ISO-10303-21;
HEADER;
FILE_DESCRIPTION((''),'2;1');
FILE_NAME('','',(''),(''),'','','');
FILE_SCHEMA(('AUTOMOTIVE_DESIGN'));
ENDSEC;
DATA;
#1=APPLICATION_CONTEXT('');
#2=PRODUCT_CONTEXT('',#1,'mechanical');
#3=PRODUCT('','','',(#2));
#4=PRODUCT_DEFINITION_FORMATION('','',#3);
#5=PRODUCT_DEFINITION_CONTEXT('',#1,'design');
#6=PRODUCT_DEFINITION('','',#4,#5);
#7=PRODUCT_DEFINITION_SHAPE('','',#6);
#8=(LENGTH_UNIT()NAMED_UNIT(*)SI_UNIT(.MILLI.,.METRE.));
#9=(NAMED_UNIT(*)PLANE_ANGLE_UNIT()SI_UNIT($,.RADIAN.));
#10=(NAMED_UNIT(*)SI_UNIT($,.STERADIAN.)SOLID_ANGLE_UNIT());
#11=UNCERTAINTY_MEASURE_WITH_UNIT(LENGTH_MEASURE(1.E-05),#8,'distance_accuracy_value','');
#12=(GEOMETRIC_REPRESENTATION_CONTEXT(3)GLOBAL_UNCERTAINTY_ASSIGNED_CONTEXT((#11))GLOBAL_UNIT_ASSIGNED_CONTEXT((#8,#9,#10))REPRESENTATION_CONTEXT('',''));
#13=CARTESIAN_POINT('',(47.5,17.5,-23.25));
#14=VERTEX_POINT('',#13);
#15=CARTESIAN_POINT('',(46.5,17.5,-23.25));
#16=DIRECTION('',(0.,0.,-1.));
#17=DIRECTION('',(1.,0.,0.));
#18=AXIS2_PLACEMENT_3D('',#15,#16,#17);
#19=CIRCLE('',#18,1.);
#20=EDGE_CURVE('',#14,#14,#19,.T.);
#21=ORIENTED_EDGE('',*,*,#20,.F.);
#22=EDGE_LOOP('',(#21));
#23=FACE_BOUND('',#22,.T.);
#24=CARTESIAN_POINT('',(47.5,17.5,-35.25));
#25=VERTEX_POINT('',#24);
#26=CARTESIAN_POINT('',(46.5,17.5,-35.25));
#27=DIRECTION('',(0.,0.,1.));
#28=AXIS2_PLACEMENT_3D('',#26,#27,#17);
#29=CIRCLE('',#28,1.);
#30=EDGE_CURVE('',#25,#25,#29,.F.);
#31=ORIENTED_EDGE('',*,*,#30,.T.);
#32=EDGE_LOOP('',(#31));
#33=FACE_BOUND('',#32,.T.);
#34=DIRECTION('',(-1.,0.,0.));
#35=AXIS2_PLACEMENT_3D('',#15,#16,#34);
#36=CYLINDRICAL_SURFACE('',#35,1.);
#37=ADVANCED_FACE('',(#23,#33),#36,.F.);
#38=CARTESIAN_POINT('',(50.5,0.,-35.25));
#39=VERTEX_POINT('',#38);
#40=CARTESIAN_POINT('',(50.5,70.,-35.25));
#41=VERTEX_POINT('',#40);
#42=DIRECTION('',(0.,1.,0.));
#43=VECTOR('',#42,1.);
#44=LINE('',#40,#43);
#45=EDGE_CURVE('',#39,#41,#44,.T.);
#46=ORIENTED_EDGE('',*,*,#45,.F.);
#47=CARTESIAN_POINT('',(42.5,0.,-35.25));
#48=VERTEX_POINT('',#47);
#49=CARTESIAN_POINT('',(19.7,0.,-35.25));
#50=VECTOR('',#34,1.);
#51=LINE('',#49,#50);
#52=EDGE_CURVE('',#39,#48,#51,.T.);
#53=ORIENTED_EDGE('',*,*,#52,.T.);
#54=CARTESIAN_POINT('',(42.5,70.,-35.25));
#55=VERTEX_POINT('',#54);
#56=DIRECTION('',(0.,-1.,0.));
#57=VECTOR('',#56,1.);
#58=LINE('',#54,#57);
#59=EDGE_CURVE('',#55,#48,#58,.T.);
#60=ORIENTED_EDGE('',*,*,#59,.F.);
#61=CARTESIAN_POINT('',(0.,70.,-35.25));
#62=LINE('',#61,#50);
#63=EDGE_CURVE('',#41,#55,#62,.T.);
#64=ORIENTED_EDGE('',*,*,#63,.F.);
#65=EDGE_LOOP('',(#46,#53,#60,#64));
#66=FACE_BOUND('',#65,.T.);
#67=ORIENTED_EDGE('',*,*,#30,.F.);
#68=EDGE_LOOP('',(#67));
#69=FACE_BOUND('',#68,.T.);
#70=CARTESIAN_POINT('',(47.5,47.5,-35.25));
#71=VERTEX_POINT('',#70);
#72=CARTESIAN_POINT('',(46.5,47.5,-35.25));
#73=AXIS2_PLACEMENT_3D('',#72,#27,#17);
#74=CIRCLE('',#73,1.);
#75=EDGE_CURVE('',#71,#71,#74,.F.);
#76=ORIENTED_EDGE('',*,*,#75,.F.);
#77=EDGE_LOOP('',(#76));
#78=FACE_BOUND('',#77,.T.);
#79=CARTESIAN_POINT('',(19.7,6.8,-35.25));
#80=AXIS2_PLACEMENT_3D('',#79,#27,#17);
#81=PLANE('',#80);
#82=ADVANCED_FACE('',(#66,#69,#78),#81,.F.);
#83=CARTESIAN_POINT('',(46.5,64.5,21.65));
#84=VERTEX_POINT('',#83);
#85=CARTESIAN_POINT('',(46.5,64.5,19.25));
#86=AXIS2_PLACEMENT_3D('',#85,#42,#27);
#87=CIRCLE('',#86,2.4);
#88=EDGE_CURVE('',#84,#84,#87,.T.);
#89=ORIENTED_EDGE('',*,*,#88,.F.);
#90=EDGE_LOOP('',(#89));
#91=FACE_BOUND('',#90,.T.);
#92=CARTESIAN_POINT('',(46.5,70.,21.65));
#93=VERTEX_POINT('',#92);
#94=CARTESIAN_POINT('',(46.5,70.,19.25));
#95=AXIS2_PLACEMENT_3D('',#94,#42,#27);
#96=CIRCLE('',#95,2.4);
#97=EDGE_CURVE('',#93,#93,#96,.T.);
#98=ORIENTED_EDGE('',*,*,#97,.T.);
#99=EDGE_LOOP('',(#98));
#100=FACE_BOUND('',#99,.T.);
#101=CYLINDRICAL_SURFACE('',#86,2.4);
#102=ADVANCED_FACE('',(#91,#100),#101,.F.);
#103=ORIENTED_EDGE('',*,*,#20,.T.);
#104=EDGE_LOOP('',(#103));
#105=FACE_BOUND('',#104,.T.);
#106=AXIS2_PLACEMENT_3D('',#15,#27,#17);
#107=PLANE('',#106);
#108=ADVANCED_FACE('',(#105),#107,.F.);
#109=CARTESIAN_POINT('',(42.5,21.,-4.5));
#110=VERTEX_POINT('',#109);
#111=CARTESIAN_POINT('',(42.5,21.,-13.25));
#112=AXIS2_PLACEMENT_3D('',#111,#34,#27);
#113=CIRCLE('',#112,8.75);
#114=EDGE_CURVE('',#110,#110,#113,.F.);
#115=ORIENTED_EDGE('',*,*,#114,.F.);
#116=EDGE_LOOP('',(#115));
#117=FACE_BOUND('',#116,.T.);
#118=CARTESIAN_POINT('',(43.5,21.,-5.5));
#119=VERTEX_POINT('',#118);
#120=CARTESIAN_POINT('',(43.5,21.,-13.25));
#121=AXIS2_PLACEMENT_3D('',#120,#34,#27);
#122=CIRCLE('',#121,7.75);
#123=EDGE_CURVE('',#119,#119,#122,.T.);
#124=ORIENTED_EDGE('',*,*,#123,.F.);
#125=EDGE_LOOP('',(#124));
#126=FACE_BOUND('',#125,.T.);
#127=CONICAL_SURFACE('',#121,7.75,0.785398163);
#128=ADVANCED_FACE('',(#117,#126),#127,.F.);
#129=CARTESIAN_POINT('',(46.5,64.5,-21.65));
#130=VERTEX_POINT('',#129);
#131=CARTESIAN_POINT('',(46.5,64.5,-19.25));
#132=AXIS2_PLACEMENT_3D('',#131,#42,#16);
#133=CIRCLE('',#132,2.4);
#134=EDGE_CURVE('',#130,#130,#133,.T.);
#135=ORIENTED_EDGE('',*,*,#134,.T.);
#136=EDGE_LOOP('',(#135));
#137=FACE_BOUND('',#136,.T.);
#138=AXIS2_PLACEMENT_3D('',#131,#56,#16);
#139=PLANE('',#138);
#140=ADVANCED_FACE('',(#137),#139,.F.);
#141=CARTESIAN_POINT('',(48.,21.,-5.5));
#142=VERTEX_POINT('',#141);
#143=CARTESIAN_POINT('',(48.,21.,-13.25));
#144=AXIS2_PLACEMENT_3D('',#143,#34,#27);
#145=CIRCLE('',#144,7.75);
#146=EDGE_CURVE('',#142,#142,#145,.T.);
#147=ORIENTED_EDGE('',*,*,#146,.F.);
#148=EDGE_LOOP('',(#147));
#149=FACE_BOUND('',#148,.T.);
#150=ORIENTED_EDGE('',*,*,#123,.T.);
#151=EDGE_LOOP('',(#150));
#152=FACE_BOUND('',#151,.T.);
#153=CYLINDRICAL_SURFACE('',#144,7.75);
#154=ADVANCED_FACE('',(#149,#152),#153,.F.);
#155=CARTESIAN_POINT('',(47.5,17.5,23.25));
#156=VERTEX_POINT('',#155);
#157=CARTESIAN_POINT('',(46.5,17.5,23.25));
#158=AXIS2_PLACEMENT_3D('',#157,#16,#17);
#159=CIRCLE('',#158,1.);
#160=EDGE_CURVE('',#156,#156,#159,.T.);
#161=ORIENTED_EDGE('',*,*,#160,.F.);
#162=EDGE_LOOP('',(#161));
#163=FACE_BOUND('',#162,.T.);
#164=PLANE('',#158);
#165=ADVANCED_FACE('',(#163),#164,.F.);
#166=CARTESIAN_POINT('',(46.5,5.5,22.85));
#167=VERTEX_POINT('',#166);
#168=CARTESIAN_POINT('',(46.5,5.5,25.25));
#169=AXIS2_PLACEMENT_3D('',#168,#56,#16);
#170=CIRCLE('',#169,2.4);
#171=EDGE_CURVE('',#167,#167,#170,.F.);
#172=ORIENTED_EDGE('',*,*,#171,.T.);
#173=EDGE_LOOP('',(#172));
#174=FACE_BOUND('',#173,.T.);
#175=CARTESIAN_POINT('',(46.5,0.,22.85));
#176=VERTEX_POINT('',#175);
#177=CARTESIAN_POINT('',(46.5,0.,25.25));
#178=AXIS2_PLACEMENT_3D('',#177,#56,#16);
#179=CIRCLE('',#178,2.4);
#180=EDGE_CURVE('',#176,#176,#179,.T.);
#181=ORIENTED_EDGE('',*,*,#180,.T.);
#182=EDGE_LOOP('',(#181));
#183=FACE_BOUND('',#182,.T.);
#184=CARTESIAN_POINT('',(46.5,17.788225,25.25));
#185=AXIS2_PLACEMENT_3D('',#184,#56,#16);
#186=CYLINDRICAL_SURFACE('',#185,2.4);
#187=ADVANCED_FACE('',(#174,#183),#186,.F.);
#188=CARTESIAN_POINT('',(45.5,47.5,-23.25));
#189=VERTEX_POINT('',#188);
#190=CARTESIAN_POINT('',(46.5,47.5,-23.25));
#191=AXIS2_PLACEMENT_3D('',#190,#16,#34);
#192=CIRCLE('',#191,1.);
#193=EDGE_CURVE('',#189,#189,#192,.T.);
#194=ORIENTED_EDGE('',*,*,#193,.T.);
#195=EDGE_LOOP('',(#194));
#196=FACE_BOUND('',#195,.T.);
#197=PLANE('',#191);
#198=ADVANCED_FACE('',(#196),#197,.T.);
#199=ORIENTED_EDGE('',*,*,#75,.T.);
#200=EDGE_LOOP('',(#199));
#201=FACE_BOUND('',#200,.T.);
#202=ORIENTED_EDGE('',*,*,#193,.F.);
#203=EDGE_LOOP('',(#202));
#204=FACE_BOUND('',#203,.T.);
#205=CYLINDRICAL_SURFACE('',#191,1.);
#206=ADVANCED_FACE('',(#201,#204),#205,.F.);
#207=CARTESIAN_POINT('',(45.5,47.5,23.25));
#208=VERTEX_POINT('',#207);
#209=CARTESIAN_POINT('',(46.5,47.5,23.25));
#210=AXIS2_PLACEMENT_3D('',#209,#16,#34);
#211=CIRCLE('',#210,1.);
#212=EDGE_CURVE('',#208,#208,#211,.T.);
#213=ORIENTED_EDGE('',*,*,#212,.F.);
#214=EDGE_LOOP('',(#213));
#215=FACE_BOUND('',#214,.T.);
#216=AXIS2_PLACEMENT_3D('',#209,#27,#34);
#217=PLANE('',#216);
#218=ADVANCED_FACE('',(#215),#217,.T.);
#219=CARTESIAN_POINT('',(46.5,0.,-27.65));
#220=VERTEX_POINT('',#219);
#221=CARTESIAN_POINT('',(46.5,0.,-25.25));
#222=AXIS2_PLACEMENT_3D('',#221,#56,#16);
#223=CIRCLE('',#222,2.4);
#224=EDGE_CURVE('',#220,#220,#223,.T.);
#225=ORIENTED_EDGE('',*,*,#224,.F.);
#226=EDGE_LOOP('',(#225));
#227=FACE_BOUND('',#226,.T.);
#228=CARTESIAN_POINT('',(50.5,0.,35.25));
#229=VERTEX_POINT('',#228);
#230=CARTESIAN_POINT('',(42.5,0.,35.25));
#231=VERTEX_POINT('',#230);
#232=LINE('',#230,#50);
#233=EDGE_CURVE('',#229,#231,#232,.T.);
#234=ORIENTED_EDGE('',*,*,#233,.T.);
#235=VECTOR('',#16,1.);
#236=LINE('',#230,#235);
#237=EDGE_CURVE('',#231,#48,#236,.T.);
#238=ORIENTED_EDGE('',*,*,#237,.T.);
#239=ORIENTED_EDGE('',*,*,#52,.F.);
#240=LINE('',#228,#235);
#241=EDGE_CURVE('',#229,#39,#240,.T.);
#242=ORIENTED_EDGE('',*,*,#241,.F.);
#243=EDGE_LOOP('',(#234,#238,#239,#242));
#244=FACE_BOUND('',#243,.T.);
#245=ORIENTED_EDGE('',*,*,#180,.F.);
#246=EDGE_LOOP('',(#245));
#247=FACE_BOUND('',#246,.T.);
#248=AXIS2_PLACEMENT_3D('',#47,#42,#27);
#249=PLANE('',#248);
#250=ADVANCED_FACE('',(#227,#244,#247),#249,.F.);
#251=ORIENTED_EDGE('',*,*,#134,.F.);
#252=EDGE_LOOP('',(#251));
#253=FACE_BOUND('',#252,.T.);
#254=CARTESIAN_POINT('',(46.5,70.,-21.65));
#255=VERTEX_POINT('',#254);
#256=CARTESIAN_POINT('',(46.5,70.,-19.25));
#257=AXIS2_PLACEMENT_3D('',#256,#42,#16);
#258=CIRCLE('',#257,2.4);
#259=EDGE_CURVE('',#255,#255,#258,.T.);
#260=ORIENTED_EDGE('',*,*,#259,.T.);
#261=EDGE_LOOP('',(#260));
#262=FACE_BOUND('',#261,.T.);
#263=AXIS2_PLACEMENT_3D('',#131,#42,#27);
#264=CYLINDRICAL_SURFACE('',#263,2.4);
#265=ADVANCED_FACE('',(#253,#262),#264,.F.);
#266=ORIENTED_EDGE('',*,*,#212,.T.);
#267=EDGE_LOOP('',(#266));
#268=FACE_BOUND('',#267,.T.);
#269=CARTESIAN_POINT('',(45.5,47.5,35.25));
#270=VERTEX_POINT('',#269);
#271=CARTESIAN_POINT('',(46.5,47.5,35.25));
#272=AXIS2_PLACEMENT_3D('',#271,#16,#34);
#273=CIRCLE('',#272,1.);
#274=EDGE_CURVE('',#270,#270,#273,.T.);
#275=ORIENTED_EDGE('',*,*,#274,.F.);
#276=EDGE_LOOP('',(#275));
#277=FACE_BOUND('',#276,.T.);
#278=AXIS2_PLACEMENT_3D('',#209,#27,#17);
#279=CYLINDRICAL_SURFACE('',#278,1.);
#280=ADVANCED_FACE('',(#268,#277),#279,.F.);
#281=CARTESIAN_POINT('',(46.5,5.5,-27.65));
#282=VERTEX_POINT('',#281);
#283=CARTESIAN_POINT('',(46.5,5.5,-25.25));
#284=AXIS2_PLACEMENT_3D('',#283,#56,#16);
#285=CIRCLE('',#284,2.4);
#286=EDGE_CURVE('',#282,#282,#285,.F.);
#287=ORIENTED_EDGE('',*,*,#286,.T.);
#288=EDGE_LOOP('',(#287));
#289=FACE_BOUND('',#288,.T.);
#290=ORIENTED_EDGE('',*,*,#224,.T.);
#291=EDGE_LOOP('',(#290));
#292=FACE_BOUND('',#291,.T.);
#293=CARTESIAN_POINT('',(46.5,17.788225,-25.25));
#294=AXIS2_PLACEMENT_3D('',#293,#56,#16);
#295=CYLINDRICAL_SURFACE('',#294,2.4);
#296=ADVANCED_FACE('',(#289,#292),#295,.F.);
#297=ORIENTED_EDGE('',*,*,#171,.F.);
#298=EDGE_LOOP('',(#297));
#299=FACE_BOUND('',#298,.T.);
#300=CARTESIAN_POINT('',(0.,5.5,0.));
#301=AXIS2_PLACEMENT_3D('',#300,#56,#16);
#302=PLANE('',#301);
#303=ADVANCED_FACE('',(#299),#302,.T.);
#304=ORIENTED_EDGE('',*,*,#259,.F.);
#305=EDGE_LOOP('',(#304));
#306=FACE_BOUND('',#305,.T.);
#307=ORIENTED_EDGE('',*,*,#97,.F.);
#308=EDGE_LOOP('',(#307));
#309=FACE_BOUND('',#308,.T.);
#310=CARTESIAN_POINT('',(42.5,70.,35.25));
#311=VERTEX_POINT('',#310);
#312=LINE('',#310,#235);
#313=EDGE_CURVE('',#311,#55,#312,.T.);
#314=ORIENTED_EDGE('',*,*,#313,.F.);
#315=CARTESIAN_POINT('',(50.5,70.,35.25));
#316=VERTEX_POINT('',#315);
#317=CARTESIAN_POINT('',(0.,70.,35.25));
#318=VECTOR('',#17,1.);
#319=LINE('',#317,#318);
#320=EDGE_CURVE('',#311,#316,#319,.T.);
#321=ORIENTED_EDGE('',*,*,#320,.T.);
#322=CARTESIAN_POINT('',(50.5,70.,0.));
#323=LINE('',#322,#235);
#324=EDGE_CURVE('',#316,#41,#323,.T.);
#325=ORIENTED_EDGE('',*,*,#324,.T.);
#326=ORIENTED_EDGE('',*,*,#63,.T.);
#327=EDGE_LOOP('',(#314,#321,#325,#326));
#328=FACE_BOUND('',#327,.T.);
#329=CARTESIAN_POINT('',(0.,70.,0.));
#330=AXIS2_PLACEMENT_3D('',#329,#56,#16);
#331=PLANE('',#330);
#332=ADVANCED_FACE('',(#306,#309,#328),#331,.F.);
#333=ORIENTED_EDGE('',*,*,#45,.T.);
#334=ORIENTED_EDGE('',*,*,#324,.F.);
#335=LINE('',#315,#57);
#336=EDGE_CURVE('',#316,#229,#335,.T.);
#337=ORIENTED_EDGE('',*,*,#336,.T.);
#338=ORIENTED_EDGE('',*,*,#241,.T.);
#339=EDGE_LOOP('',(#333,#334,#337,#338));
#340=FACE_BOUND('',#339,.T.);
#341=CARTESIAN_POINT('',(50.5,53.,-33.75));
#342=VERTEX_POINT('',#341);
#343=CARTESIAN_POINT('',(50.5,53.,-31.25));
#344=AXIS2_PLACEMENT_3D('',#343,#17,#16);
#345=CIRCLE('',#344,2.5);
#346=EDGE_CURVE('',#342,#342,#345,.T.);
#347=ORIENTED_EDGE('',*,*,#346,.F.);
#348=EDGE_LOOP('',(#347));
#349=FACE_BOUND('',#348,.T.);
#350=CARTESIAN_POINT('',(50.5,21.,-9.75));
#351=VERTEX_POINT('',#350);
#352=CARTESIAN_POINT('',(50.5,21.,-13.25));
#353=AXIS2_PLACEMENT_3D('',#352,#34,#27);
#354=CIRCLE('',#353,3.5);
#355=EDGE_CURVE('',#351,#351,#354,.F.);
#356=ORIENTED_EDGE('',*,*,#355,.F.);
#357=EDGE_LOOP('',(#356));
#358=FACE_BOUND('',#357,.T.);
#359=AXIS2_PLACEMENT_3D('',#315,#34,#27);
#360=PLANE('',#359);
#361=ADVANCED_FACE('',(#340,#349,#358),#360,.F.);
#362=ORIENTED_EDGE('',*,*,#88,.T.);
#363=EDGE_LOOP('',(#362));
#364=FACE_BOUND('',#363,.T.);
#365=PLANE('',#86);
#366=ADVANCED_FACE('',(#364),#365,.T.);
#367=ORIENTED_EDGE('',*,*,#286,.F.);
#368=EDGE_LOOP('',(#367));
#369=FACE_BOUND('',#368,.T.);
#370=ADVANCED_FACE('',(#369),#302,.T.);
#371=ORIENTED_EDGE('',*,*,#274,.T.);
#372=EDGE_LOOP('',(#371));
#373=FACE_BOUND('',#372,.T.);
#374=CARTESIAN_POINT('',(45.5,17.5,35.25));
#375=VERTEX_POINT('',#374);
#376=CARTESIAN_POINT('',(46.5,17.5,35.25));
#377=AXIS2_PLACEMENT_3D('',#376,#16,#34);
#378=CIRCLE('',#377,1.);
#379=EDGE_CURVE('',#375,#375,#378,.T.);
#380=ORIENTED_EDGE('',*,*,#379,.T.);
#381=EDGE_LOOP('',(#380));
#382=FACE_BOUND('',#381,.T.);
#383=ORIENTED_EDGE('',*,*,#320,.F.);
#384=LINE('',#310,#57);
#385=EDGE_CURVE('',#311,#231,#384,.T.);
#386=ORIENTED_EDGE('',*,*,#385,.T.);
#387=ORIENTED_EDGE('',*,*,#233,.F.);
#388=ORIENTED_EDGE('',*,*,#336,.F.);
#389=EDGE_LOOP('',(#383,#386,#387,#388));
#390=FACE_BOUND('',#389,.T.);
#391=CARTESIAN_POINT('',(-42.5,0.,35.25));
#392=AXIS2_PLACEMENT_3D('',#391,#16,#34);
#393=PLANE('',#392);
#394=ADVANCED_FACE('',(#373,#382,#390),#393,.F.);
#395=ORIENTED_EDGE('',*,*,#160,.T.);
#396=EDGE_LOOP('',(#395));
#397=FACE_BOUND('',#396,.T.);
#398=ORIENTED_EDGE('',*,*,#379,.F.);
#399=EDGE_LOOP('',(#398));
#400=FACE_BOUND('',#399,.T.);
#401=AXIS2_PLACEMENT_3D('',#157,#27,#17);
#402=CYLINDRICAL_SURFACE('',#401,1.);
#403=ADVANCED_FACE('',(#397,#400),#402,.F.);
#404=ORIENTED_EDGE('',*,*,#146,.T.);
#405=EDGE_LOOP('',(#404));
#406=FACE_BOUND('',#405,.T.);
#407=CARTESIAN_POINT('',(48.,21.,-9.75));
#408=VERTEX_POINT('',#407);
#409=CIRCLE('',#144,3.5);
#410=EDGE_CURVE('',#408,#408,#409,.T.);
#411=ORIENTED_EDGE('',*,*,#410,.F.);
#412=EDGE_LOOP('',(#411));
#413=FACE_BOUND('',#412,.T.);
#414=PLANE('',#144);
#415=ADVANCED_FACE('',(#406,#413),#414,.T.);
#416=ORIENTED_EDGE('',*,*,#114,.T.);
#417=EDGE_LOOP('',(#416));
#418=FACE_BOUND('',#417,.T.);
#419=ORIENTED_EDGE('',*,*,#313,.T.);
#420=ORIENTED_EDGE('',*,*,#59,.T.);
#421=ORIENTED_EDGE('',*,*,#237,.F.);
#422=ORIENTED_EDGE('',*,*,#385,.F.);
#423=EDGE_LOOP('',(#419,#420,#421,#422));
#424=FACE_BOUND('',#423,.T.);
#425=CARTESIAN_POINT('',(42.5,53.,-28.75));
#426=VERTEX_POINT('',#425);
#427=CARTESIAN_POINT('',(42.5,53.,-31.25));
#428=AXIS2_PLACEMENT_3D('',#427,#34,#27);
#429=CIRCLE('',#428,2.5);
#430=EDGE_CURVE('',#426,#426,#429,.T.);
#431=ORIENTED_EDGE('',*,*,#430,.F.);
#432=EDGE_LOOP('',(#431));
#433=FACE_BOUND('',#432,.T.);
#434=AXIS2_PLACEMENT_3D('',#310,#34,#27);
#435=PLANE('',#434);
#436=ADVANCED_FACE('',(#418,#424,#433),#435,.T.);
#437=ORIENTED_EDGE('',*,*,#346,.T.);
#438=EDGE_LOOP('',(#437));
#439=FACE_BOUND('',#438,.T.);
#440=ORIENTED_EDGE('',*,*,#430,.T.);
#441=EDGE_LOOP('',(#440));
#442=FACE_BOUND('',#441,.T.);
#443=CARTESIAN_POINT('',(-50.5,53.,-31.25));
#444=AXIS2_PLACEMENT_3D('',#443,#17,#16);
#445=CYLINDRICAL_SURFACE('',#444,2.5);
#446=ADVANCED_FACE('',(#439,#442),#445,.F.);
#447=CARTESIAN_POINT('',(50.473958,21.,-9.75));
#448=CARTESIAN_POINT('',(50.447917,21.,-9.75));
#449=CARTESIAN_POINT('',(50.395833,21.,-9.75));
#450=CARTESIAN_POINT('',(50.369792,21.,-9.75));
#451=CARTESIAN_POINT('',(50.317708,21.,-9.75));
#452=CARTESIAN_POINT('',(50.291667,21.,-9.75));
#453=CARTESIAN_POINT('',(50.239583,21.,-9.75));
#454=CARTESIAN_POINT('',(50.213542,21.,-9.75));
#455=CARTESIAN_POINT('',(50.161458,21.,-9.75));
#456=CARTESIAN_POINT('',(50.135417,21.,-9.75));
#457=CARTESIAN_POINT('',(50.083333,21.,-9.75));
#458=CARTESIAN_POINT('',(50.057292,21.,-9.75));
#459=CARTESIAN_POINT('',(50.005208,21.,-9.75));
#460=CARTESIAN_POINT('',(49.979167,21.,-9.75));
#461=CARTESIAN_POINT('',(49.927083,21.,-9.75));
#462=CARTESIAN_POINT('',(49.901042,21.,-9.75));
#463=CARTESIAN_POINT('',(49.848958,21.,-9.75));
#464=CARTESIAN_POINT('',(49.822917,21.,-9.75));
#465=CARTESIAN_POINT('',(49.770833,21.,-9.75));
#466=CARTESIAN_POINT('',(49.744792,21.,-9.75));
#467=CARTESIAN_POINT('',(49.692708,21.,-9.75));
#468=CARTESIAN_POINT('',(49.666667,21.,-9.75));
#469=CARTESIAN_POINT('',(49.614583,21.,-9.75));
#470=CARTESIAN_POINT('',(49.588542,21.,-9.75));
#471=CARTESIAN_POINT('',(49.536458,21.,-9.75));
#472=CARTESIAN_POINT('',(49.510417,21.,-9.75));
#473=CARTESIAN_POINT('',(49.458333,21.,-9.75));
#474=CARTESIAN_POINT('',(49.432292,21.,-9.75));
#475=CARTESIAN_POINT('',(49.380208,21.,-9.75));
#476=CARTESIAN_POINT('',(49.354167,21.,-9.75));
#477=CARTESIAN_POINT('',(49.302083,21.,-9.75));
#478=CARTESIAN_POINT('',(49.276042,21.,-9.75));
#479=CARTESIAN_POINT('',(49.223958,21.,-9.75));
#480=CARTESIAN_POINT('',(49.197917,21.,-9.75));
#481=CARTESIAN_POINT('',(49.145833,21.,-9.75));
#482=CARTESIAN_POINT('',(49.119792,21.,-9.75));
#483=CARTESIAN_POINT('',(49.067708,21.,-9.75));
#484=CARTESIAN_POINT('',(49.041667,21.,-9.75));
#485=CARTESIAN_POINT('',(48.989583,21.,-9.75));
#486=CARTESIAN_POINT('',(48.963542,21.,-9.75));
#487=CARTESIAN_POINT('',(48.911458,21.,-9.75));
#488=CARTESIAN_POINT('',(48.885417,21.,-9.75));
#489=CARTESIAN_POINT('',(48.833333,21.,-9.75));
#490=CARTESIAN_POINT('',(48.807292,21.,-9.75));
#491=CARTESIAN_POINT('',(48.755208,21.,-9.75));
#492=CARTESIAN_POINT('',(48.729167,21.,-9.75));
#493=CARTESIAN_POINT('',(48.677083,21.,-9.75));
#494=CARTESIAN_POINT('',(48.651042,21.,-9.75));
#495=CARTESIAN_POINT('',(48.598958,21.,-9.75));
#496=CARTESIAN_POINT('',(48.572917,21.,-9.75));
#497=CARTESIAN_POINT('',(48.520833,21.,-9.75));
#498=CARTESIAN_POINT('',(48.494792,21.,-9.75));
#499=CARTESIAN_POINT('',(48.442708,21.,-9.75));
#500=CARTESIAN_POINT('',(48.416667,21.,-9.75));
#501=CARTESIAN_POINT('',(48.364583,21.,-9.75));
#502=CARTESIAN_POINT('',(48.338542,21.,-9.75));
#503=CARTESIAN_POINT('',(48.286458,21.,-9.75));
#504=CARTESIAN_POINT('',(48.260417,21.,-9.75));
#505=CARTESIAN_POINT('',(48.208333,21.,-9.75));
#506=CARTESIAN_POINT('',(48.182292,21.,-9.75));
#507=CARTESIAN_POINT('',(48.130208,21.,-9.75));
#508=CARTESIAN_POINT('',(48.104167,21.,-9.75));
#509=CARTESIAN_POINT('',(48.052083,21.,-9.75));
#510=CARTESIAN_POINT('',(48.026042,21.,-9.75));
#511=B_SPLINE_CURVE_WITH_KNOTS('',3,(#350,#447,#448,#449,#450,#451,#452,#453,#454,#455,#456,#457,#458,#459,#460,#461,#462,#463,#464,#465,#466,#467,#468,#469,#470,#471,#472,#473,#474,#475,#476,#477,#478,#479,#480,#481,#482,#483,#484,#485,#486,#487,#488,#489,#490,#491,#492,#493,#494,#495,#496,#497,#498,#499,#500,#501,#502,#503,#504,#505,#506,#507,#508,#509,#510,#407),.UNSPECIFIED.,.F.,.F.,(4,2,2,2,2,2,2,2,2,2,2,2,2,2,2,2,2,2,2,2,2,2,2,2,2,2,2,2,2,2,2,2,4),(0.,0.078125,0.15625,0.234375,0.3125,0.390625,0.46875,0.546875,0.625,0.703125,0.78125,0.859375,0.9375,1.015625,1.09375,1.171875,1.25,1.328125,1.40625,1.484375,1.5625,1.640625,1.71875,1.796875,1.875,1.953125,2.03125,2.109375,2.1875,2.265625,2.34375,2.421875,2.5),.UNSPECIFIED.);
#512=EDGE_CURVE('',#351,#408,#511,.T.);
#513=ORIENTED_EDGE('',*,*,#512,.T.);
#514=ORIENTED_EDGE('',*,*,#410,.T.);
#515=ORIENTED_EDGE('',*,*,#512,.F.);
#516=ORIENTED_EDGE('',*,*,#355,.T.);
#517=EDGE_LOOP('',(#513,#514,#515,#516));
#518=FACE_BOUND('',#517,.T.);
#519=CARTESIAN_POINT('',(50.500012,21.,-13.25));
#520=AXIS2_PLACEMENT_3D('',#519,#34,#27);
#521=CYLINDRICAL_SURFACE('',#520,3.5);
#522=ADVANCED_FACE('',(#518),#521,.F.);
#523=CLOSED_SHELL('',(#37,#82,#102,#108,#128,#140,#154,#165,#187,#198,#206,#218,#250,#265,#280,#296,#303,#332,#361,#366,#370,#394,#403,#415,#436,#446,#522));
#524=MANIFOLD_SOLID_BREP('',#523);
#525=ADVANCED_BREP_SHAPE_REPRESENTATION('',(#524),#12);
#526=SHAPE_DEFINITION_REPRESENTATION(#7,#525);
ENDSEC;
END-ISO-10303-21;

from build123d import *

# Parameters (mm, degrees)
SKETCH1_W                                           = 85
SKETCH1_H                                           = 70.5
BOSS_EXTRUDE1_DEPTH                                 = 70
SHELL1_T                                            = 8
CUT_EXTRUDE1_REACH                                  = 132.275
SKETCH2_R                                           = 3.5
CUT_EXTRUDE1_DIRECTION_2_DEPTH                      = 131.274949626
CBORE_FOR_M3_HEX_SOCKET_HEAD_CAP_SCREW1_D           = 3.8
CBORE_FOR_M3_HEX_SOCKET_HEAD_CAP_SCREW1_DEPTH       = 10
CBORE_FOR_M3_HEX_SOCKET_HEAD_CAP_SCREW1_CBORE_D     = 8
CBORE_FOR_M3_HEX_SOCKET_HEAD_CAP_SCREW1_CBORE_DEPTH = 3.4
CBORE_FOR_M3_HEX_SOCKET_HEAD_CAP_SCREW1_TIP         = 1.141635176
SKETCH14_W                                          = 12
SKETCH14_H                                          = 14
CUT_EXTRUDE3_DEPTH                                  = 5.5
SKETCH15_R                                          = 3.45
CUT_EXTRUDE4_DEPTH                                  = 101.60349149
SKETCH16_W                                          = 12
SKETCH16_H                                          = 2.5
CUT_EXTRUDE5_DEPTH                                  = 1.5
SKETCH17_W                                          = 7.1
SKETCH17_H                                          = 4.1
SKETCH17_W_2                                        = 7.8
SKETCH17_H_2                                        = 6
CUT_EXTRUDE6_DEPTH                                  = 97.544355091
CUT_EXTRUDE7_DEPTH                                  = 97.544355091
CUT_EXTRUDE8_DEPTH                                  = 125.175531003
CHAMFER2_SIZE                                       = 1
LPATTERN1_COUNT                                     = 5
LPATTERN1_PITCH                                     = 8
CHAMFER2_OF_LPATTERN1_SIZE                          = 1
CBORE_FOR_M3_HEX_SOCKET_HEAD_CAP_SCREW4_D           = 3.6
CBORE_FOR_M3_HEX_SOCKET_HEAD_CAP_SCREW4_DEPTH       = 10
CBORE_FOR_M3_HEX_SOCKET_HEAD_CAP_SCREW4_CBORE_D     = 6.5
CBORE_FOR_M3_HEX_SOCKET_HEAD_CAP_SCREW4_CBORE_DEPTH = 3.4
CBORE_FOR_M3_HEX_SOCKET_HEAD_CAP_SCREW4_TIP         = 1.081549114
SKETCH26_R                                          = 7.75
CUT_EXTRUDE9_DEPTH                                  = 5.5
CHAMFER1_SIZE                                       = 1
SKETCH28_R                                          = 2.4
CUT_EXTRUDE11_DEPTH                                 = 5.5
CHAMFER3_SIZE                                       = 1
FILLET4_R                                           = 3
SKETCH34_R                                          = 1
CUT_EXTRUDE13_DEPTH                                 = 20
CUT_EXTRUDE14_START                                 = -8
SKETCH35_R                                          = 2.4
CUT_EXTRUDE14_DEPTH                                 = 5.5
CBORE_FOR_M3_HEX_SOCKET_HEAD_CAP_SCREW5_D           = 3.6
CBORE_FOR_M3_HEX_SOCKET_HEAD_CAP_SCREW5_DEPTH       = 13.499
CBORE_FOR_M3_HEX_SOCKET_HEAD_CAP_SCREW5_CBORE_D     = 6.5
CBORE_FOR_M3_HEX_SOCKET_HEAD_CAP_SCREW5_CBORE_DEPTH = 3.4
SKETCH40_R                                          = 2.5
CUT_EXTRUDE16_DEPTH                                 = 131.274949737
CBORE_FOR_M4_HEX_SOCKET_HEAD_CAP_SCREW1_D           = 4.5
CBORE_FOR_M4_HEX_SOCKET_HEAD_CAP_SCREW1_DEPTH       = 18
CBORE_FOR_M4_HEX_SOCKET_HEAD_CAP_SCREW1_CBORE_D     = 8
CBORE_FOR_M4_HEX_SOCKET_HEAD_CAP_SCREW1_CBORE_DEPTH = 4.4
CBORE_FOR_M3_HEX_SOCKET_HEAD_CAP_SCREW6_D           = 3.4
CBORE_FOR_M3_HEX_SOCKET_HEAD_CAP_SCREW6_DEPTH       = 18
CBORE_FOR_M3_HEX_SOCKET_HEAD_CAP_SCREW6_CBORE_D     = 6.5
CBORE_FOR_M3_HEX_SOCKET_HEAD_CAP_SCREW6_CBORE_DEPTH = 3.4
CBORE_FOR_M3_HEX_SOCKET_HEAD_CAP_SCREW6_TIP         = 1.021463052
CUT_EXTRUDE18_REACH                                 = 124.199
SKETCH53_W                                          = 10
SKETCH53_H                                          = 6.8
SPLIT5_START                                        = -8
SPLIT5_OUTLINE_W                                    = 14
SPLIT5_OUTLINE_H                                    = 12
SPLIT5_OUTLINE_R                                    = 3.45
SPLIT5_OUTLINE_R_2                                  = 3.25
SPLIT5_OUTLINE_R_3                                  = 1.8
SPLIT5_OUTLINE_R_4                                  = 1.7
SPLIT5_DEPTH                                        = 78
SPLIT5_2_OUTLINE_W                                  = 14
SPLIT5_2_OUTLINE_H                                  = 12
SPLIT5_2_OUTLINE_R                                  = 3.25
SPLIT5_2_OUTLINE_W_2                                = 7.1
SPLIT5_2_OUTLINE_H_2                                = 4.1
SPLIT5_2_OUTLINE_W_3                                = 7.8
SPLIT5_2_OUTLINE_H_3                                = 6
SPLIT5_2_OUTLINE_R_2                                = 1.8
SPLIT5_2_DEPTH                                      = 8


# Read off the part's stored shape, not the designer's step: Split5
with BuildPart() as part:
    # Sketch1 → Boss-Extrude1 (new body)
    with BuildSketch(Plane(origin=(0, 0, 0), x_dir=(1, 0, 0), z_dir=(0, 1, 0))):
        Rectangle(SKETCH1_W, SKETCH1_H)
    extrude(amount=BOSS_EXTRUDE1_DEPTH)

    # Shell1
    shell1_openings = [part.faces().sort_by_distance(p)[0] for p in [
        (0, 70, 0),
    ]]
    offset(amount=SHELL1_T, openings=shell1_openings, kind=Kind.INTERSECTION)

    # Sketch2 → Cut-Extrude1 (cut, up to next)
    with BuildSketch(Plane(origin=(50.5, 0, 0), x_dir=(0, 0, -1), z_dir=(1, 0, 0)), mode=Mode.PRIVATE) as cut_extrude1_sk1:
        with Locations(Location((13.25, 21, 0), (0, 0, 180))):
            Circle(SKETCH2_R)
    cut_extrude1_tool1 = extrude(cut_extrude1_sk1.sketch, amount=-CUT_EXTRUDE1_REACH, mode=Mode.PRIVATE) & part.part
    add(cut_extrude1_tool1.solids().sort_by_distance((50.5, 21, -13.25))[0], mode=Mode.SUBTRACT)

    # Sketch2 → Cut-Extrude1 direction 2 (cut)
    with BuildSketch(Plane(origin=(50.5, 0, 0), x_dir=(0, 0, -1), z_dir=(1, 0, 0))):
        with Locations(Location((13.25, 21, 0), (0, 0, 180))):
            Circle(SKETCH2_R)
    extrude(amount=CUT_EXTRUDE1_DIRECTION_2_DEPTH, mode=Mode.SUBTRACT)

    # CBORE for M3 Hex Socket Head Cap Screw1
    with Locations(Plane.XY.offset(43.25)):
        with Locations((-34, 55.5), (-3, 55.5), (-34, 24.5)):
            CounterBoreHole(CBORE_FOR_M3_HEX_SOCKET_HEAD_CAP_SCREW1_D / 2, CBORE_FOR_M3_HEX_SOCKET_HEAD_CAP_SCREW1_CBORE_D / 2, CBORE_FOR_M3_HEX_SOCKET_HEAD_CAP_SCREW1_CBORE_DEPTH, depth=CBORE_FOR_M3_HEX_SOCKET_HEAD_CAP_SCREW1_DEPTH)
            with Locations((0, 0, -(CBORE_FOR_M3_HEX_SOCKET_HEAD_CAP_SCREW1_DEPTH + CBORE_FOR_M3_HEX_SOCKET_HEAD_CAP_SCREW1_TIP / 2))):  # 118° drill point
                Cone(0, CBORE_FOR_M3_HEX_SOCKET_HEAD_CAP_SCREW1_D / 2, CBORE_FOR_M3_HEX_SOCKET_HEAD_CAP_SCREW1_TIP, mode=Mode.SUBTRACT)

    # Sketch14 → Cut-Extrude3 (cut)
    with BuildSketch(Plane(origin=(-42.5, 0, 0), x_dir=(0, 0, -1), z_dir=(0, 1, 0))):
        with Locations((-17.25, -13)):
            Rectangle(SKETCH14_W, SKETCH14_H)
    extrude(amount=-CUT_EXTRUDE3_DEPTH, mode=Mode.SUBTRACT)

    # Sketch15 → Cut-Extrude4 (cut, through all)
    with BuildSketch(Plane(origin=(0, -5.5, 0), x_dir=(0, 0, -1), z_dir=(0, 1, 0))):
        with Locations(Location((-17.25, 29.5, 0), (0, 0, 90))):
            Circle(SKETCH15_R)
    extrude(amount=-CUT_EXTRUDE4_DEPTH, mode=Mode.SUBTRACT)

    # Sketch16 → Cut-Extrude5 (cut)
    with BuildSketch(Plane(origin=(0, -5.5, 0), x_dir=(0, 0, -1), z_dir=(0, 1, 0))):
        with Locations((-17.25, 35.25)):
            Rectangle(SKETCH16_W, SKETCH16_H)
    extrude(amount=-CUT_EXTRUDE5_DEPTH, mode=Mode.SUBTRACT)

    # Sketch17 → Cut-Extrude6 (cut, through all)
    with BuildSketch(Plane(origin=(0, 0, 0), x_dir=(1, 0, 0), z_dir=(0, 1, 0))):
        with Locations((19.15, -29.25)):
            Rectangle(SKETCH17_W, SKETCH17_H)
        with Locations((30.6, -29.25)):
            Rectangle(SKETCH17_W_2, SKETCH17_H_2)
    extrude(amount=-CUT_EXTRUDE6_DEPTH, mode=Mode.SUBTRACT)

    # Sketch18 → Cut-Extrude7 (cut, through all)
    with BuildSketch(Plane(origin=(0, 0, 0), x_dir=(1, 0, 0), z_dir=(0, 1, 0))):
        with BuildLine():
            Line((-19.5, -29.25), (-19.5, -21.25))
            ThreePointArc((-19.5, -21.25), (-17.5, -19.25), (-15.5, -21.25))
            Line((-15.5, -21.25), (-15.5, -29.25))
            ThreePointArc((-15.5, -29.25), (-17.5, -31.25), (-19.5, -29.25))
        make_face()
        with BuildLine():
            Line((-7.5, -29.25), (-7.5, -21.25))
            ThreePointArc((-7.5, -21.25), (-9.5, -19.25), (-11.5, -21.25))
            Line((-11.5, -21.25), (-11.5, -29.25))
            ThreePointArc((-11.5, -29.25), (-9.5, -31.25), (-7.5, -29.25))
        make_face()
    extrude(amount=-CUT_EXTRUDE7_DEPTH, mode=Mode.SUBTRACT)

    # Sketch19 → Cut-Extrude8 (cut, through all)
    with BuildSketch(Plane(origin=(-42.5, 0, 0), x_dir=(0, 0, -1), z_dir=(1, 0, 0))):
        with BuildLine():
            Line((-27.75, 60), (-27.75, 15))
            ThreePointArc((-27.75, 15), (-29.25, 13.5), (-30.75, 15))
            Line((-30.75, 15), (-30.75, 60))
            ThreePointArc((-30.75, 60), (-29.25, 61.5), (-27.75, 60))
        make_face()
    cut_extrude8 = extrude(amount=-CUT_EXTRUDE8_DEPTH, mode=Mode.SUBTRACT)

    # Chamfer2
    chamfer2_edges = [part.edges().sort_by_distance(p)[0] for p in [
        (-50.5, 61.5, 29.25),
        (-50.5, 37.5, 27.75),
        (-50.5, 13.5, 29.25),
        (-50.5, 37.5, 30.75),
        (-42.5, 61.5, 29.25),
        (-42.5, 37.5, 30.75),
        (-42.5, 13.5, 29.25),
        (-42.5, 37.5, 27.75),
    ]]
    chamfer(chamfer2_edges, length=CHAMFER2_SIZE)

    # LPattern1: Cut-Extrude8 ×5
    with Locations(*[(0, 0, -i * LPATTERN1_PITCH) for i in range(1, LPATTERN1_COUNT)]):
        add(cut_extrude8, mode=Mode.SUBTRACT)

    # Chamfer2 of LPattern1
    chamfer2_of_lpattern1_edges = [part.edges().sort_by_distance(p)[0] for p in [
        (-50.5, 61.5, 21.25),
        (-50.5, 37.5, 19.75),
        (-50.5, 13.5, 21.25),
        (-50.5, 37.5, 22.75),
        (-42.5, 61.5, 21.25),
        (-42.5, 37.5, 22.75),
        (-42.5, 13.5, 21.25),
        (-42.5, 37.5, 19.75),
        (-50.5, 61.5, 13.25),
        (-50.5, 37.5, 11.75),
        (-50.5, 13.5, 13.25),
        (-50.5, 37.5, 14.75),
        (-42.5, 61.5, 13.25),
        (-42.5, 37.5, 14.75),
        (-42.5, 13.5, 13.25),
        (-42.5, 37.5, 11.75),
        (-50.5, 61.5, 5.25),
        (-50.5, 37.5, 3.75),
        (-50.5, 13.5, 5.25),
        (-50.5, 37.5, 6.75),
        (-42.5, 61.5, 5.25),
        (-42.5, 37.5, 6.75),
        (-42.5, 13.5, 5.25),
        (-42.5, 37.5, 3.75),
        (-50.5, 61.5, -2.75),
        (-50.5, 37.5, -4.25),
        (-50.5, 13.5, -2.75),
        (-50.5, 37.5, -1.25),
        (-42.5, 61.5, -2.75),
        (-42.5, 37.5, -1.25),
        (-42.5, 13.5, -2.75),
        (-42.5, 37.5, -4.25),
    ]]
    chamfer(chamfer2_of_lpattern1_edges, length=CHAMFER2_OF_LPATTERN1_SIZE)

    # CBORE for M3 Hex Socket Head Cap Screw4
    with Locations(Plane(origin=(0, 0, 0), x_dir=(1, 0, 0), z_dir=(0, 1, 0))):
        with Locations((33.5, 23.25), (33.5, 3.25), (13.5, 13.25), (-6.5, 23.25), (-6.5, 3.25)):
            CounterBoreHole(CBORE_FOR_M3_HEX_SOCKET_HEAD_CAP_SCREW4_D / 2, CBORE_FOR_M3_HEX_SOCKET_HEAD_CAP_SCREW4_CBORE_D / 2, CBORE_FOR_M3_HEX_SOCKET_HEAD_CAP_SCREW4_CBORE_DEPTH, depth=CBORE_FOR_M3_HEX_SOCKET_HEAD_CAP_SCREW4_DEPTH)
            with Locations((0, 0, -(CBORE_FOR_M3_HEX_SOCKET_HEAD_CAP_SCREW4_DEPTH + CBORE_FOR_M3_HEX_SOCKET_HEAD_CAP_SCREW4_TIP / 2))):  # 118° drill point
                Cone(0, CBORE_FOR_M3_HEX_SOCKET_HEAD_CAP_SCREW4_D / 2, CBORE_FOR_M3_HEX_SOCKET_HEAD_CAP_SCREW4_TIP, mode=Mode.SUBTRACT)

    # Sketch26 → Cut-Extrude9 (cut)
    with BuildSketch(Plane.ZY.offset(-42.5)):
        with Locations((-13.25, 21)):
            Circle(SKETCH26_R)
    extrude(amount=-CUT_EXTRUDE9_DEPTH, mode=Mode.SUBTRACT)

    # Chamfer1
    chamfer1_edges = [part.edges().sort_by_distance(p)[0] for p in [
        (42.5, 21, -21),
    ]]
    chamfer(chamfer1_edges, length=CHAMFER1_SIZE)

    # Sketch28 → Cut-Extrude11 (cut)
    with BuildSketch(Plane(origin=(0, 70, 0), x_dir=(1, 0, 0), z_dir=(0, 1, 0))):
        with Locations(Location((-26.5, 39.25, 0), (0, 0, 270))):
            Circle(SKETCH28_R)
        with Locations(Location((-46.5, 19.25, 0), (0, 0, 270))):
            Circle(SKETCH28_R)
        with Locations(Location((46.5, 19.25, 0), (0, 0, 90))):
            Circle(SKETCH28_R)
        with Locations(Location((26.5, 39.25, 0), (0, 0, 90))):
            Circle(SKETCH28_R)
        with Locations(Location((26.5, -39.25, 0), (0, 0, 270))):
            Circle(SKETCH28_R)
        with Locations(Location((46.5, -19.25, 0), (0, 0, 270))):
            Circle(SKETCH28_R)
        with Locations(Location((-46.5, -19.25, 0), (0, 0, 90))):
            Circle(SKETCH28_R)
        with Locations(Location((-26.5, -39.25, 0), (0, 0, 90))):
            Circle(SKETCH28_R)
    extrude(amount=-CUT_EXTRUDE11_DEPTH, mode=Mode.SUBTRACT)

    # Chamfer3
    chamfer3_edges = [part.edges().sort_by_distance(p)[0] for p in [
        (34.5, 0, 29.25),
        (30.6, 0, 26.25),
        (26.7, 0, 29.25),
        (30.6, 0, 32.25),
        (22.7, 0, 29.25),
        (19.15, 0, 27.2),
        (15.6, 0, 29.25),
        (19.15, 0, 31.3),
    ]]
    chamfer(chamfer3_edges, length=CHAMFER3_SIZE)

    # Fillet4
    fillet4_edges = [part.edges().sort_by_distance(p)[0] for p in [
        (0, -8, 43.25),
        (-50.5, -8, 0),
        (0, -8, -43.25),
        (50.5, -8, 0),
        (50.5, 31, 43.25),
        (-50.5, 31, 43.25),
        (-50.5, 31, -43.25),
        (50.5, 31, -43.25),
    ]]
    fillet(fillet4_edges, radius=FILLET4_R)

    # Sketch34 → Cut-Extrude13 (cut)
    with BuildSketch(Plane(origin=(0, 0, -43.25), x_dir=(-1, 0, 0), z_dir=(0, 0, -1))):
        with Locations((-46.5, 47.5)):
            Circle(SKETCH34_R)
        with Locations(Location((-46.5, 17.5, 0), (0, 0, 180))):
            Circle(SKETCH34_R)
        with Locations((46.5, 17.5)):
            Circle(SKETCH34_R)
        with Locations((46.5, 47.5)):
            Circle(SKETCH34_R)
    cut_extrude13 = extrude(amount=-CUT_EXTRUDE13_DEPTH, mode=Mode.SUBTRACT)

    # Mirror2: Cut-Extrude13 across plane
    add(cut_extrude13.mirror(Plane.XY), mode=Mode.SUBTRACT)

    # Sketch35 → Cut-Extrude14 (cut)
    with BuildSketch(Plane.XZ.offset(8).offset(CUT_EXTRUDE14_START)):
        with Locations(Location((46.5, 25.25, 0), (0, 0, 270))):
            Circle(SKETCH35_R)
        with Locations(Location((46.5, -25.25, 0), (0, 0, 270))):
            Circle(SKETCH35_R)
        with Locations(Location((-46.5, -25.25, 0), (0, 0, 270))):
            Circle(SKETCH35_R)
        with Locations(Location((-46.5, 25.25, 0), (0, 0, 270))):
            Circle(SKETCH35_R)
        with Locations(Location((32.5, 39.25, 0), (0, 0, 270))):
            Circle(SKETCH35_R)
        with Locations(Location((-32.5, 39.25, 0), (0, 0, 270))):
            Circle(SKETCH35_R)
        with Locations(Location((-32.5, -39.25, 0), (0, 0, 270))):
            Circle(SKETCH35_R)
        with Locations(Location((32.5, -39.25, 0), (0, 0, 270))):
            Circle(SKETCH35_R)
    extrude(amount=-CUT_EXTRUDE14_DEPTH, mode=Mode.SUBTRACT)

    # CBORE for M3 Hex Socket Head Cap Screw5
    with Locations(Plane(origin=(0, -8, 0), x_dir=(-1, 0, 0), z_dir=(0, -1, 0))):
        with Locations((-46.5, -25.25), (46.5, -25.25), (46.5, 25.25), (32.5, 39.25), (-32.5, 39.25), (-46.5, 25.25), (-32.5, -39.25), (32.5, -39.25)):
            CounterBoreHole(CBORE_FOR_M3_HEX_SOCKET_HEAD_CAP_SCREW5_D / 2, CBORE_FOR_M3_HEX_SOCKET_HEAD_CAP_SCREW5_CBORE_D / 2, CBORE_FOR_M3_HEX_SOCKET_HEAD_CAP_SCREW5_CBORE_DEPTH, depth=CBORE_FOR_M3_HEX_SOCKET_HEAD_CAP_SCREW5_DEPTH)

    # Sketch40 → Cut-Extrude16 (cut, through all)
    with BuildSketch(Plane(origin=(50.5, 0, 0), x_dir=(0, 0, -1), z_dir=(1, 0, 0))):
        with Locations((31.25, 53)):
            Circle(SKETCH40_R)
    extrude(amount=-CUT_EXTRUDE16_DEPTH, mode=Mode.SUBTRACT)

    # CBORE for M4 Hex Socket Head Cap Screw1
    with Locations(Plane(origin=(0, -8, 0), x_dir=(-1, 0, 0), z_dir=(0, -1, 0))):
        with Locations((-24.7, 38.75), (6, 38.75)):
            CounterBoreHole(CBORE_FOR_M4_HEX_SOCKET_HEAD_CAP_SCREW1_D / 2, CBORE_FOR_M4_HEX_SOCKET_HEAD_CAP_SCREW1_CBORE_D / 2, CBORE_FOR_M4_HEX_SOCKET_HEAD_CAP_SCREW1_CBORE_DEPTH, depth=CBORE_FOR_M4_HEX_SOCKET_HEAD_CAP_SCREW1_DEPTH)

    # CBORE for M3 Hex Socket Head Cap Screw6
    with Locations(Plane(origin=(0, -8, 0), x_dir=(-1, 0, 0), z_dir=(0, -1, 0))):
        with Locations((-24.7, -12.25), (6, -12.25)):
            CounterBoreHole(CBORE_FOR_M3_HEX_SOCKET_HEAD_CAP_SCREW6_D / 2, CBORE_FOR_M3_HEX_SOCKET_HEAD_CAP_SCREW6_CBORE_D / 2, CBORE_FOR_M3_HEX_SOCKET_HEAD_CAP_SCREW6_CBORE_DEPTH, depth=CBORE_FOR_M3_HEX_SOCKET_HEAD_CAP_SCREW6_DEPTH)
            with Locations((0, 0, -(CBORE_FOR_M3_HEX_SOCKET_HEAD_CAP_SCREW6_DEPTH + CBORE_FOR_M3_HEX_SOCKET_HEAD_CAP_SCREW6_TIP / 2))):  # 118° drill point
                Cone(0, CBORE_FOR_M3_HEX_SOCKET_HEAD_CAP_SCREW6_D / 2, CBORE_FOR_M3_HEX_SOCKET_HEAD_CAP_SCREW6_TIP, mode=Mode.SUBTRACT)

    # Cut-Extrude18: up to this face of the body (flat: up to its plane)
    cut_extrude18_end = Plane(part.part.faces().sort_by_distance((0, 35, -35.25))[0])
    # Sketch53 → Cut-Extrude18 (cut, up to the picked face)
    with BuildSketch(Plane(origin=(0, 0, -43.25), x_dir=(-1, 0, 0), z_dir=(0, 0, -1)), mode=Mode.PRIVATE) as cut_extrude18_sk1:
        with Locations((-24.7, 3.4)):
            Rectangle(SKETCH53_W, SKETCH53_H)
    cut_extrude18_tool1 = split(extrude(cut_extrude18_sk1.sketch, amount=-CUT_EXTRUDE18_REACH, mode=Mode.PRIVATE), bisect_by=cut_extrude18_end, keep=Keep.BOTH, mode=Mode.PRIVATE)
    # Sketch53 → Cut-Extrude18 (cut, up to the picked face)
    with BuildSketch(Plane(origin=(0, 0, -43.25), x_dir=(-1, 0, 0), z_dir=(0, 0, -1)), mode=Mode.PRIVATE) as cut_extrude18_sk2:
        with Locations((6, 3.4)):
            Rectangle(SKETCH53_W, SKETCH53_H)
    cut_extrude18_tool2 = split(extrude(cut_extrude18_sk2.sketch, amount=-CUT_EXTRUDE18_REACH, mode=Mode.PRIVATE), bisect_by=cut_extrude18_end, keep=Keep.BOTH, mode=Mode.PRIVATE)
    add(cut_extrude18_tool1.solids().sort_by(Axis((24.7, 3.4, -43.25), (0, 0, 1)))[0], mode=Mode.SUBTRACT)
    add(cut_extrude18_tool2.solids().sort_by(Axis((-6, 3.4, -43.25), (0, 0, 1)))[0], mode=Mode.SUBTRACT)

    # Split5 outline → Split5 (cut)
    # profile 1 of 9: a face of its own
    with BuildSketch(Plane(origin=(0, 0, 0), x_dir=(1, 0, 0), z_dir=(0, 1, 0)).offset(SPLIT5_START)):
        with BuildLine():
            Line((50.5, -40.25), (50.5, -35.25))
            Line((50.5, -35.25), (-42.5, -35.25))
            Line((-42.5, -35.25), (-42.5, 35.25))
            Line((-42.5, 35.25), (-7.936491673, 35.25))
            ThreePointArc((-7.936491673, 35.25), (-6, 34.75), (-4.063508327, 35.25))
            Line((-4.063508327, 35.25), (22.763508327, 35.25))
            ThreePointArc((22.763508327, 35.25), (24.7, 34.75), (26.636491673, 35.25))
            Line((26.636491673, 35.25), (50.5, 35.25))
            Line((50.5, 35.25), (50.5, 40.25))
            ThreePointArc((50.5, 40.25), (49.621320344, 42.371320344), (47.5, 43.25))
            Line((47.5, 43.25), (-47.5, 43.25))
            ThreePointArc((-47.5, 43.25), (-49.621320344, 42.371320344), (-50.5, 40.25))
            Line((-50.5, 40.25), (-50.5, -40.25))
            ThreePointArc((-50.5, -40.25), (-49.621320344, -42.371320344), (-47.5, -43.25))
            Line((-47.5, -43.25), (47.5, -43.25))
            ThreePointArc((47.5, -43.25), (49.621320344, -42.371320344), (50.5, -40.25))
        make_face()
    # profile 2 of 9: a face of its own
    with BuildSketch(Plane(origin=(0, 0, 0), x_dir=(1, 0, 0), z_dir=(0, 1, 0)).offset(SPLIT5_START)):
        with Locations((-29.5, -17.25)):
            Rectangle(SPLIT5_OUTLINE_W, SPLIT5_OUTLINE_H)
        with Locations((-29.5, -17.25)):
            Circle(SPLIT5_OUTLINE_R, mode=Mode.SUBTRACT)
    # profile 3 of 9: a face of its own
    with BuildSketch(Plane(origin=(0, 0, 0), x_dir=(1, 0, 0), z_dir=(0, 1, 0)).offset(SPLIT5_START)):
        with Locations((-6.5, 3.25)):
            Circle(SPLIT5_OUTLINE_R_2)
        with Locations((-6.5, 3.25)):
            Circle(SPLIT5_OUTLINE_R_3, mode=Mode.SUBTRACT)
    # profile 4 of 9: a face of its own
    with BuildSketch(Plane(origin=(0, 0, 0), x_dir=(1, 0, 0), z_dir=(0, 1, 0)).offset(SPLIT5_START)):
        with Locations((-6.5, 23.25)):
            Circle(SPLIT5_OUTLINE_R_2)
        with Locations((-6.5, 23.25)):
            Circle(SPLIT5_OUTLINE_R_3, mode=Mode.SUBTRACT)
    # profile 5 of 9: a face of its own
    with BuildSketch(Plane(origin=(0, 0, 0), x_dir=(1, 0, 0), z_dir=(0, 1, 0)).offset(SPLIT5_START)):
        with Locations((13.5, 13.25)):
            Circle(SPLIT5_OUTLINE_R_2)
        with Locations((13.5, 13.25)):
            Circle(SPLIT5_OUTLINE_R_3, mode=Mode.SUBTRACT)
    # profile 6 of 9: a face of its own
    with BuildSketch(Plane(origin=(0, 0, 0), x_dir=(1, 0, 0), z_dir=(0, 1, 0)).offset(SPLIT5_START)):
        with Locations((33.5, 3.25)):
            Circle(SPLIT5_OUTLINE_R_2)
        with Locations((33.5, 3.25)):
            Circle(SPLIT5_OUTLINE_R_3, mode=Mode.SUBTRACT)
    # profile 7 of 9: a face of its own
    with BuildSketch(Plane(origin=(0, 0, 0), x_dir=(1, 0, 0), z_dir=(0, 1, 0)).offset(SPLIT5_START)):
        with Locations((33.5, 23.25)):
            Circle(SPLIT5_OUTLINE_R_2)
        with Locations((33.5, 23.25)):
            Circle(SPLIT5_OUTLINE_R_3, mode=Mode.SUBTRACT)
    # profile 8 of 9: a face of its own
    with BuildSketch(Plane(origin=(0, 0, 0), x_dir=(1, 0, 0), z_dir=(0, 1, 0)).offset(SPLIT5_START)):
        with Locations((-6, -12.25)):
            Circle(SPLIT5_OUTLINE_R_2)
        with Locations((-6, -12.25)):
            Circle(SPLIT5_OUTLINE_R_4, mode=Mode.SUBTRACT)
    # profile 9 of 9: a face of its own
    with BuildSketch(Plane(origin=(0, 0, 0), x_dir=(1, 0, 0), z_dir=(0, 1, 0)).offset(SPLIT5_START)):
        with Locations((24.7, -12.25)):
            Circle(SPLIT5_OUTLINE_R_2)
        with Locations((24.7, -12.25)):
            Circle(SPLIT5_OUTLINE_R_4, mode=Mode.SUBTRACT)
    extrude(amount=SPLIT5_DEPTH, mode=Mode.SUBTRACT)

    # Split5 2 outline → Split5 2 (cut)
    with BuildSketch(Plane(origin=(0, 0, 0), x_dir=(1, 0, 0), z_dir=(0, 1, 0)).offset(SPLIT5_START)):
        with BuildLine():
            Line((50.5, -35.25), (50.5, 35.25))
            Line((50.5, 35.25), (26.636491673, 35.25))
            ThreePointArc((26.636491673, 35.25), (24.7, 34.75), (22.763508327, 35.25))
            Line((22.763508327, 35.25), (-4.063508327, 35.25))
            ThreePointArc((-4.063508327, 35.25), (-6, 34.75), (-7.936491673, 35.25))
            Line((-7.936491673, 35.25), (-42.5, 35.25))
            Line((-42.5, 35.25), (-42.5, -35.25))
            Line((-42.5, -35.25), (50.5, -35.25))
        make_face()
        with BuildLine():
            ThreePointArc((-15.5, -29.25), (-17.5, -31.25), (-19.5, -29.25))
            Line((-19.5, -29.25), (-19.5, -21.25))
            ThreePointArc((-19.5, -21.25), (-17.5, -19.25), (-15.5, -21.25))
            Line((-15.5, -21.25), (-15.5, -29.25))
        make_face(mode=Mode.SUBTRACT)
        with BuildLine():
            ThreePointArc((-7.5, -29.25), (-9.5, -31.25), (-11.5, -29.25))
            Line((-11.5, -29.25), (-11.5, -21.25))
            ThreePointArc((-11.5, -21.25), (-9.5, -19.25), (-7.5, -21.25))
            Line((-7.5, -21.25), (-7.5, -29.25))
        make_face(mode=Mode.SUBTRACT)
        with Locations((-29.5, -17.25)):
            Rectangle(SPLIT5_2_OUTLINE_W, SPLIT5_2_OUTLINE_H, mode=Mode.SUBTRACT)
        with Locations((-6, -12.25)):
            Circle(SPLIT5_2_OUTLINE_R, mode=Mode.SUBTRACT)
        with Locations((19.15, -29.25)):
            Rectangle(SPLIT5_2_OUTLINE_W_2, SPLIT5_2_OUTLINE_H_2, mode=Mode.SUBTRACT)
        with Locations((30.6, -29.25)):
            Rectangle(SPLIT5_2_OUTLINE_W_3, SPLIT5_2_OUTLINE_H_3, mode=Mode.SUBTRACT)
        with Locations((24.7, -12.25)):
            Circle(SPLIT5_2_OUTLINE_R, mode=Mode.SUBTRACT)
        with Locations((-6.5, 3.25)):
            Circle(SPLIT5_2_OUTLINE_R, mode=Mode.SUBTRACT)
        with Locations((-6.5, 23.25)):
            Circle(SPLIT5_2_OUTLINE_R, mode=Mode.SUBTRACT)
        with Locations((13.5, 13.25)):
            Circle(SPLIT5_2_OUTLINE_R, mode=Mode.SUBTRACT)
        with Locations((33.5, 3.25)):
            Circle(SPLIT5_2_OUTLINE_R, mode=Mode.SUBTRACT)
        with Locations((33.5, 23.25)):
            Circle(SPLIT5_2_OUTLINE_R, mode=Mode.SUBTRACT)
        with Locations((46.5, -25.25)):
            Circle(SPLIT5_2_OUTLINE_R_2, mode=Mode.SUBTRACT)
        with Locations((46.5, 25.25)):
            Circle(SPLIT5_2_OUTLINE_R_2, mode=Mode.SUBTRACT)
    extrude(amount=SPLIT5_2_DEPTH, mode=Mode.SUBTRACT)


solid = part.part
